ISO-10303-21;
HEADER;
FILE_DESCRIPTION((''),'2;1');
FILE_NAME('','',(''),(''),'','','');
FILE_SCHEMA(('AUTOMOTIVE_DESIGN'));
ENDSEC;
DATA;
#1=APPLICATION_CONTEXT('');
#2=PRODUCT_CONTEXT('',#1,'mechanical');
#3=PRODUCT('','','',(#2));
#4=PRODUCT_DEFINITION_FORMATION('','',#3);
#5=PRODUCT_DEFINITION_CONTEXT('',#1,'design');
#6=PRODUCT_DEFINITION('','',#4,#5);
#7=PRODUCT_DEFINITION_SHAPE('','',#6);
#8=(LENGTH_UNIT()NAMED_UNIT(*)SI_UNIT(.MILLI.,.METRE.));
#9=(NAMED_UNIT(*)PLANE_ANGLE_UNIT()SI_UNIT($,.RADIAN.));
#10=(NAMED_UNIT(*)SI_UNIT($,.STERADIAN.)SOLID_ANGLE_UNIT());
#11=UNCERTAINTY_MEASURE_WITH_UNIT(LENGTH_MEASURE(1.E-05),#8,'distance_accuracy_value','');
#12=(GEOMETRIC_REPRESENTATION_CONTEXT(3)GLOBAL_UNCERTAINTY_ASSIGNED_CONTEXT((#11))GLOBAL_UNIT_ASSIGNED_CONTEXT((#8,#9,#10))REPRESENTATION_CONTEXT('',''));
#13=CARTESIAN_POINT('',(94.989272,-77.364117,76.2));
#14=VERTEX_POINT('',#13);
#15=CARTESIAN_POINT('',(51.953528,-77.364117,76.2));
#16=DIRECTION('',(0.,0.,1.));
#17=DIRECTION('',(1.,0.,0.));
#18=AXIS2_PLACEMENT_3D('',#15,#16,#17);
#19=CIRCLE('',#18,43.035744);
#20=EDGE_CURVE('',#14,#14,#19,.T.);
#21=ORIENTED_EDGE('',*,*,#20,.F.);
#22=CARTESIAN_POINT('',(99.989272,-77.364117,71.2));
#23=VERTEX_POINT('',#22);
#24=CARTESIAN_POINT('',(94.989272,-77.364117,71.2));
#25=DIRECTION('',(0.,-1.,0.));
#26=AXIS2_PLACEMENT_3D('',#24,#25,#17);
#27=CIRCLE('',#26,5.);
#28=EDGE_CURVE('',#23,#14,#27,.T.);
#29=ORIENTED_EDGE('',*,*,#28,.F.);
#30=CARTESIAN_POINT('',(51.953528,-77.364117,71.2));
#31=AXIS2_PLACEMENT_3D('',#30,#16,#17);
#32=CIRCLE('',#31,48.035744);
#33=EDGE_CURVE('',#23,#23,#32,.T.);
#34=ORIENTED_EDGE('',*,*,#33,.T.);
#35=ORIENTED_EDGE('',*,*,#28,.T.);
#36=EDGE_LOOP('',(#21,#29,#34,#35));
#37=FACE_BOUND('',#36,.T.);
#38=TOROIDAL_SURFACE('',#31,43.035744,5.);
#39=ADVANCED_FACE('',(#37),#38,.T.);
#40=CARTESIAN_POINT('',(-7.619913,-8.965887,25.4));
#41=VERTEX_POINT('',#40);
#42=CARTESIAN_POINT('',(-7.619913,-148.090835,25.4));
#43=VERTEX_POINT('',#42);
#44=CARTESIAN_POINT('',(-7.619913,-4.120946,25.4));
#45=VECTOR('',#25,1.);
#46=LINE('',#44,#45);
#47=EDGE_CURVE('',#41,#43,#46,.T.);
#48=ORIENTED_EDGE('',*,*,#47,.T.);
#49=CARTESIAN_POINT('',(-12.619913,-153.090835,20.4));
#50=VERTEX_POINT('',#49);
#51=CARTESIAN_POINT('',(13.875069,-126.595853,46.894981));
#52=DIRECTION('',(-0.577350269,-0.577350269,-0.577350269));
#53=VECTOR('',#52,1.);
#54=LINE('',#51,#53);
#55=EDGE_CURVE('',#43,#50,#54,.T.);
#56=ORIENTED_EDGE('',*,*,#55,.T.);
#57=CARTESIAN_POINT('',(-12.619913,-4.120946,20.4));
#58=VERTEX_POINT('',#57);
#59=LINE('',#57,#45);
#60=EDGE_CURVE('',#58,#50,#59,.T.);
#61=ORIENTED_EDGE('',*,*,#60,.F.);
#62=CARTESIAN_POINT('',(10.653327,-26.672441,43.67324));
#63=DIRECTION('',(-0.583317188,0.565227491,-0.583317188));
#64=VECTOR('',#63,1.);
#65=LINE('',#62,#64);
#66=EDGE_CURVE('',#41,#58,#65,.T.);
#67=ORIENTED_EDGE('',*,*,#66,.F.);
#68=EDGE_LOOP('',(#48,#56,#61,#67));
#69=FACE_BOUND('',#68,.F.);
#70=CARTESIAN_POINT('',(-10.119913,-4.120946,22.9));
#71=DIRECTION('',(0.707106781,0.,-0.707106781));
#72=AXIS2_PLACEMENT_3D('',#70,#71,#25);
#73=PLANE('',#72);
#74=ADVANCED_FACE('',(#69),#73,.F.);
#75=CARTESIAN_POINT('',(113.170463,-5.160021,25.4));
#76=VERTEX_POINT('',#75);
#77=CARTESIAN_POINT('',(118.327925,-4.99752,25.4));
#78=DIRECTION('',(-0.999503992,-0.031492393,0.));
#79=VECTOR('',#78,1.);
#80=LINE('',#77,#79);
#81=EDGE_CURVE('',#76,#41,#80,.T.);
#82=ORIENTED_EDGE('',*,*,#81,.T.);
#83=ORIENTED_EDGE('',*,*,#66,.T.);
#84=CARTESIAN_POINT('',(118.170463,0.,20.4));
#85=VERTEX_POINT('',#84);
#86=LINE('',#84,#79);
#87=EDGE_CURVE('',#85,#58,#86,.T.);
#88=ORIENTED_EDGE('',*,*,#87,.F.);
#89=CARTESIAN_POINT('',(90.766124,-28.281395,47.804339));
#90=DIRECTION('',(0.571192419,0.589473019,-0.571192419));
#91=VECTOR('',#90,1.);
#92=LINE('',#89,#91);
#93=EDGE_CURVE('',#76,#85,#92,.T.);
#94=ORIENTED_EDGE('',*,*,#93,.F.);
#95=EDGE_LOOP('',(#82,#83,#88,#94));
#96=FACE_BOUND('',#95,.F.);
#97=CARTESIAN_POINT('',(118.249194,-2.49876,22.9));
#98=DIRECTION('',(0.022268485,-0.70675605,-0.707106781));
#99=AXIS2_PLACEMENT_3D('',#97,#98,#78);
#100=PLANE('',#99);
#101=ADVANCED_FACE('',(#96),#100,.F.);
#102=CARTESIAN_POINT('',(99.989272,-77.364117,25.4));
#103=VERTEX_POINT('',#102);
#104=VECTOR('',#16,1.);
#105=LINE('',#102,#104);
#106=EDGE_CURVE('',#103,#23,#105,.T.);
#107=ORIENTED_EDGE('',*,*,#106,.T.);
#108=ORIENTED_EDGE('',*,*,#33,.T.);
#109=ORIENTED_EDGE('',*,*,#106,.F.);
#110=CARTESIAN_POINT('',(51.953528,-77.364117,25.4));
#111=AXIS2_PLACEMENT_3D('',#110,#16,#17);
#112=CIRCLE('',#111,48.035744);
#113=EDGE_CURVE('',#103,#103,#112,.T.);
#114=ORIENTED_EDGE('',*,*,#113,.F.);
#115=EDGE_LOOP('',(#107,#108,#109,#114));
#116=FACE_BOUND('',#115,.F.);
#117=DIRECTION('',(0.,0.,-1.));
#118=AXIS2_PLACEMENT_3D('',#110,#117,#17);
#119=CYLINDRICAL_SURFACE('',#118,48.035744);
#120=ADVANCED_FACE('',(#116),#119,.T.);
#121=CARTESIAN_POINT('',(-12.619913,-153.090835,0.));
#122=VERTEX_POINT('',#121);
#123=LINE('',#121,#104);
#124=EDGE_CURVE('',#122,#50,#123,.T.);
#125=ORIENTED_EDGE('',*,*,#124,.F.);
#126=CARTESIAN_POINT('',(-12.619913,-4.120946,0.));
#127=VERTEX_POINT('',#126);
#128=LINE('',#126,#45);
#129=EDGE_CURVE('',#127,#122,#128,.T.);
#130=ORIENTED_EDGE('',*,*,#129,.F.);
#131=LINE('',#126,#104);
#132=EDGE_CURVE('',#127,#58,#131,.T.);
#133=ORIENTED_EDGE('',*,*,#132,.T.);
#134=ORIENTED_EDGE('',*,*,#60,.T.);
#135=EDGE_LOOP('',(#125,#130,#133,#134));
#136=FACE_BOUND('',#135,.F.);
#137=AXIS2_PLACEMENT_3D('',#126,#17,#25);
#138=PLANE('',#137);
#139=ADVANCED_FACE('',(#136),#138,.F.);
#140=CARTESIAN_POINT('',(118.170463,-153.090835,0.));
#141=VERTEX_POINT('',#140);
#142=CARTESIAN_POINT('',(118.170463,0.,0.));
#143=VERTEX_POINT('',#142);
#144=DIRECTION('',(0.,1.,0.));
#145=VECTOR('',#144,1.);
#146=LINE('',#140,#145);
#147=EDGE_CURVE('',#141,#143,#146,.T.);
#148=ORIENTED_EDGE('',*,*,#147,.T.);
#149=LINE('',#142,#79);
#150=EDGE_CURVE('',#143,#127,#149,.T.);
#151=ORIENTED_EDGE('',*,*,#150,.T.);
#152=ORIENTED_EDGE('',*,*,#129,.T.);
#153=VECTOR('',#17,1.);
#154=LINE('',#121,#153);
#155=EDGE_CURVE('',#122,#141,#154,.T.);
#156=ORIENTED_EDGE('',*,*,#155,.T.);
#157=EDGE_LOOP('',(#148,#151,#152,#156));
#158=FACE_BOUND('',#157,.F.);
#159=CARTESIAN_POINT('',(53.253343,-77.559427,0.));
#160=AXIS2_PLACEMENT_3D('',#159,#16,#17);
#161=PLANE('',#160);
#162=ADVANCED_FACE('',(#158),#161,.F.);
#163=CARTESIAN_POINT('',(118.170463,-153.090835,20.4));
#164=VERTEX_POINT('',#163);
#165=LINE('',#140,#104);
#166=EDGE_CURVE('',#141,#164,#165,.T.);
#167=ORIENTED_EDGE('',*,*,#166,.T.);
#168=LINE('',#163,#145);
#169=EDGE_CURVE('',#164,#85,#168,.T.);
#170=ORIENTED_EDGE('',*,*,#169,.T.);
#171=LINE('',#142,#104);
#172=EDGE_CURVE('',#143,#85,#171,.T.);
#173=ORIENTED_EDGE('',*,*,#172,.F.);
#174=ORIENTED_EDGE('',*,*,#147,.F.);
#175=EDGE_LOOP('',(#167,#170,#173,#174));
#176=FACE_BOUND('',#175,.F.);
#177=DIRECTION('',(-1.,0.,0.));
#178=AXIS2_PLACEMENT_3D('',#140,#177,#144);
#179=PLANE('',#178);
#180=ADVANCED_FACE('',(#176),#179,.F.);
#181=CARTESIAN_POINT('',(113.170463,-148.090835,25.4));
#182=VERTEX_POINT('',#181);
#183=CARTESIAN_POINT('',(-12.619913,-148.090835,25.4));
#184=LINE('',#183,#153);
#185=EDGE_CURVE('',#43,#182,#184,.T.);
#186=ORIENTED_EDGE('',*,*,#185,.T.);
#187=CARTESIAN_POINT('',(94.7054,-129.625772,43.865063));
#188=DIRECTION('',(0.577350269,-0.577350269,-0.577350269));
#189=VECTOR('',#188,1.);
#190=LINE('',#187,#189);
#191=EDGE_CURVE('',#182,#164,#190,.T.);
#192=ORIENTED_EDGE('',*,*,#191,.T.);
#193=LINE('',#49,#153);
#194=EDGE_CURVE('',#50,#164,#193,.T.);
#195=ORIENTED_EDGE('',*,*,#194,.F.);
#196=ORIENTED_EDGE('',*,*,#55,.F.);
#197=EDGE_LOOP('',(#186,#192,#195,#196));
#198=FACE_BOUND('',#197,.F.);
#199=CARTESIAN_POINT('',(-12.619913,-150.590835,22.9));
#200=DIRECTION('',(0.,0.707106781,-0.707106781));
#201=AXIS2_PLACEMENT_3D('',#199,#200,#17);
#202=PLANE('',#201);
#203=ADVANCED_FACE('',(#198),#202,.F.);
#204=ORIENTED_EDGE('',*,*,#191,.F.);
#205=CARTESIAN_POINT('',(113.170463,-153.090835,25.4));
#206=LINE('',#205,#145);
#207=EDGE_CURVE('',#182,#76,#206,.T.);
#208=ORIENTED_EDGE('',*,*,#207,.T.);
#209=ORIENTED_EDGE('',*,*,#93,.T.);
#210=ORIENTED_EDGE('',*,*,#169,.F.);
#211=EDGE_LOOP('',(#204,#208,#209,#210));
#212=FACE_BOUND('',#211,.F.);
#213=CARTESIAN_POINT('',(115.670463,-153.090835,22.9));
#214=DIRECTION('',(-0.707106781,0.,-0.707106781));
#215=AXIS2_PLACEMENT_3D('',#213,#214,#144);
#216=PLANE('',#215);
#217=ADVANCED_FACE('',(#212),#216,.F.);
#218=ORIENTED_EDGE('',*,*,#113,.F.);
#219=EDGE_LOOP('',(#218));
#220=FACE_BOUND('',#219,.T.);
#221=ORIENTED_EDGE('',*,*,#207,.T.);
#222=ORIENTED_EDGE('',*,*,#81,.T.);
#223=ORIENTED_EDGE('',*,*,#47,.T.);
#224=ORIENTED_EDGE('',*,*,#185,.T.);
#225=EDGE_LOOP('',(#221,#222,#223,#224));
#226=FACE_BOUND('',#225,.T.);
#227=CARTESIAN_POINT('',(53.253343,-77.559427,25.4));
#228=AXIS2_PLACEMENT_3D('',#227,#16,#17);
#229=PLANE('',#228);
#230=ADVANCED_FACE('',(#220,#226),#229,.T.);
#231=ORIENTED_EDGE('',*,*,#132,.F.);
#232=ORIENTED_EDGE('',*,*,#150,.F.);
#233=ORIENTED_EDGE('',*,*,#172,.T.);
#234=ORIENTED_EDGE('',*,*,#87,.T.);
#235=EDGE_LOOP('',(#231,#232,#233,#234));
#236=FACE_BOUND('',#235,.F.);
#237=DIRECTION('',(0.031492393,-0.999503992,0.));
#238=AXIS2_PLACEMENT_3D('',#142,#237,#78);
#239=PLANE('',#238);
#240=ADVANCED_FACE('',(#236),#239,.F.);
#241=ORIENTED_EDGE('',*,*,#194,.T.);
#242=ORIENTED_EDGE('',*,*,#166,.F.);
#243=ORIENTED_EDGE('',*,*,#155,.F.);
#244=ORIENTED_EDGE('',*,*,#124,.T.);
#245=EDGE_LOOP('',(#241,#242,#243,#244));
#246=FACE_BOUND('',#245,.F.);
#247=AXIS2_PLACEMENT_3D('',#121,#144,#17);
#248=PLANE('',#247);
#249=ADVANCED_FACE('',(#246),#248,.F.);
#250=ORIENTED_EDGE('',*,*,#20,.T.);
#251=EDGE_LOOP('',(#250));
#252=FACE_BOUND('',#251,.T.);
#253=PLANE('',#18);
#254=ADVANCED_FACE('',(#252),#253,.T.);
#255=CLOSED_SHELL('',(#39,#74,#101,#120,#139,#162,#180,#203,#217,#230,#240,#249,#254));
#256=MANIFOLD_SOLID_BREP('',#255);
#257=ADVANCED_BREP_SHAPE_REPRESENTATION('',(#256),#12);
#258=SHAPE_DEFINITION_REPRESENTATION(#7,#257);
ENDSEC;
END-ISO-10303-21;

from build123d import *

# Parameters (mm, degrees)
F1_DEPTH = 25.4
F2_R     = 48.0357441032
F3_DEPTH = 50.8
F4_R     = 5
F5_SIZE  = 5


# Not quite as in the source:
# - the program builds the solid bodies; features that only make, move or delete a surface that nothing else refers to are left out


with BuildPart() as f1:
    # F0 (on Top) → F1 (new body)
    with BuildSketch(Plane.XY):
        Polygon((118.1704625487, 0), (-12.6199126244, -4.1209459305), (-12.6199126244, -153.0908346176), (118.1704625487, -153.0908346176), align=None)
    extrude(amount=F1_DEPTH)

    # F2 (on face) → F3 (join)
    with BuildSketch(Plane.XY.offset(25.4)):
        with Locations((51.9535280764, -77.3641169071)):
            Circle(F2_R)
    extrude(amount=F3_DEPTH)

    # F4
    f4_edges = [f1.edges().sort_by_distance(p)[0] for p in [
        (3.917784, -77.364117, 76.2),
    ]]
    fillet(f4_edges, radius=F4_R)

    # F5
    f5_edges = [f1.edges().sort_by_distance(p)[0] for p in [
        (118.170463, -76.545417, 25.4),
        (52.775275, -2.060473, 25.4),
        (-12.619913, -78.60589, 25.4),
        (52.775275, -153.090835, 25.4),
    ]]
    chamfer(f5_edges, length=F5_SIZE)


solid = f1.part
